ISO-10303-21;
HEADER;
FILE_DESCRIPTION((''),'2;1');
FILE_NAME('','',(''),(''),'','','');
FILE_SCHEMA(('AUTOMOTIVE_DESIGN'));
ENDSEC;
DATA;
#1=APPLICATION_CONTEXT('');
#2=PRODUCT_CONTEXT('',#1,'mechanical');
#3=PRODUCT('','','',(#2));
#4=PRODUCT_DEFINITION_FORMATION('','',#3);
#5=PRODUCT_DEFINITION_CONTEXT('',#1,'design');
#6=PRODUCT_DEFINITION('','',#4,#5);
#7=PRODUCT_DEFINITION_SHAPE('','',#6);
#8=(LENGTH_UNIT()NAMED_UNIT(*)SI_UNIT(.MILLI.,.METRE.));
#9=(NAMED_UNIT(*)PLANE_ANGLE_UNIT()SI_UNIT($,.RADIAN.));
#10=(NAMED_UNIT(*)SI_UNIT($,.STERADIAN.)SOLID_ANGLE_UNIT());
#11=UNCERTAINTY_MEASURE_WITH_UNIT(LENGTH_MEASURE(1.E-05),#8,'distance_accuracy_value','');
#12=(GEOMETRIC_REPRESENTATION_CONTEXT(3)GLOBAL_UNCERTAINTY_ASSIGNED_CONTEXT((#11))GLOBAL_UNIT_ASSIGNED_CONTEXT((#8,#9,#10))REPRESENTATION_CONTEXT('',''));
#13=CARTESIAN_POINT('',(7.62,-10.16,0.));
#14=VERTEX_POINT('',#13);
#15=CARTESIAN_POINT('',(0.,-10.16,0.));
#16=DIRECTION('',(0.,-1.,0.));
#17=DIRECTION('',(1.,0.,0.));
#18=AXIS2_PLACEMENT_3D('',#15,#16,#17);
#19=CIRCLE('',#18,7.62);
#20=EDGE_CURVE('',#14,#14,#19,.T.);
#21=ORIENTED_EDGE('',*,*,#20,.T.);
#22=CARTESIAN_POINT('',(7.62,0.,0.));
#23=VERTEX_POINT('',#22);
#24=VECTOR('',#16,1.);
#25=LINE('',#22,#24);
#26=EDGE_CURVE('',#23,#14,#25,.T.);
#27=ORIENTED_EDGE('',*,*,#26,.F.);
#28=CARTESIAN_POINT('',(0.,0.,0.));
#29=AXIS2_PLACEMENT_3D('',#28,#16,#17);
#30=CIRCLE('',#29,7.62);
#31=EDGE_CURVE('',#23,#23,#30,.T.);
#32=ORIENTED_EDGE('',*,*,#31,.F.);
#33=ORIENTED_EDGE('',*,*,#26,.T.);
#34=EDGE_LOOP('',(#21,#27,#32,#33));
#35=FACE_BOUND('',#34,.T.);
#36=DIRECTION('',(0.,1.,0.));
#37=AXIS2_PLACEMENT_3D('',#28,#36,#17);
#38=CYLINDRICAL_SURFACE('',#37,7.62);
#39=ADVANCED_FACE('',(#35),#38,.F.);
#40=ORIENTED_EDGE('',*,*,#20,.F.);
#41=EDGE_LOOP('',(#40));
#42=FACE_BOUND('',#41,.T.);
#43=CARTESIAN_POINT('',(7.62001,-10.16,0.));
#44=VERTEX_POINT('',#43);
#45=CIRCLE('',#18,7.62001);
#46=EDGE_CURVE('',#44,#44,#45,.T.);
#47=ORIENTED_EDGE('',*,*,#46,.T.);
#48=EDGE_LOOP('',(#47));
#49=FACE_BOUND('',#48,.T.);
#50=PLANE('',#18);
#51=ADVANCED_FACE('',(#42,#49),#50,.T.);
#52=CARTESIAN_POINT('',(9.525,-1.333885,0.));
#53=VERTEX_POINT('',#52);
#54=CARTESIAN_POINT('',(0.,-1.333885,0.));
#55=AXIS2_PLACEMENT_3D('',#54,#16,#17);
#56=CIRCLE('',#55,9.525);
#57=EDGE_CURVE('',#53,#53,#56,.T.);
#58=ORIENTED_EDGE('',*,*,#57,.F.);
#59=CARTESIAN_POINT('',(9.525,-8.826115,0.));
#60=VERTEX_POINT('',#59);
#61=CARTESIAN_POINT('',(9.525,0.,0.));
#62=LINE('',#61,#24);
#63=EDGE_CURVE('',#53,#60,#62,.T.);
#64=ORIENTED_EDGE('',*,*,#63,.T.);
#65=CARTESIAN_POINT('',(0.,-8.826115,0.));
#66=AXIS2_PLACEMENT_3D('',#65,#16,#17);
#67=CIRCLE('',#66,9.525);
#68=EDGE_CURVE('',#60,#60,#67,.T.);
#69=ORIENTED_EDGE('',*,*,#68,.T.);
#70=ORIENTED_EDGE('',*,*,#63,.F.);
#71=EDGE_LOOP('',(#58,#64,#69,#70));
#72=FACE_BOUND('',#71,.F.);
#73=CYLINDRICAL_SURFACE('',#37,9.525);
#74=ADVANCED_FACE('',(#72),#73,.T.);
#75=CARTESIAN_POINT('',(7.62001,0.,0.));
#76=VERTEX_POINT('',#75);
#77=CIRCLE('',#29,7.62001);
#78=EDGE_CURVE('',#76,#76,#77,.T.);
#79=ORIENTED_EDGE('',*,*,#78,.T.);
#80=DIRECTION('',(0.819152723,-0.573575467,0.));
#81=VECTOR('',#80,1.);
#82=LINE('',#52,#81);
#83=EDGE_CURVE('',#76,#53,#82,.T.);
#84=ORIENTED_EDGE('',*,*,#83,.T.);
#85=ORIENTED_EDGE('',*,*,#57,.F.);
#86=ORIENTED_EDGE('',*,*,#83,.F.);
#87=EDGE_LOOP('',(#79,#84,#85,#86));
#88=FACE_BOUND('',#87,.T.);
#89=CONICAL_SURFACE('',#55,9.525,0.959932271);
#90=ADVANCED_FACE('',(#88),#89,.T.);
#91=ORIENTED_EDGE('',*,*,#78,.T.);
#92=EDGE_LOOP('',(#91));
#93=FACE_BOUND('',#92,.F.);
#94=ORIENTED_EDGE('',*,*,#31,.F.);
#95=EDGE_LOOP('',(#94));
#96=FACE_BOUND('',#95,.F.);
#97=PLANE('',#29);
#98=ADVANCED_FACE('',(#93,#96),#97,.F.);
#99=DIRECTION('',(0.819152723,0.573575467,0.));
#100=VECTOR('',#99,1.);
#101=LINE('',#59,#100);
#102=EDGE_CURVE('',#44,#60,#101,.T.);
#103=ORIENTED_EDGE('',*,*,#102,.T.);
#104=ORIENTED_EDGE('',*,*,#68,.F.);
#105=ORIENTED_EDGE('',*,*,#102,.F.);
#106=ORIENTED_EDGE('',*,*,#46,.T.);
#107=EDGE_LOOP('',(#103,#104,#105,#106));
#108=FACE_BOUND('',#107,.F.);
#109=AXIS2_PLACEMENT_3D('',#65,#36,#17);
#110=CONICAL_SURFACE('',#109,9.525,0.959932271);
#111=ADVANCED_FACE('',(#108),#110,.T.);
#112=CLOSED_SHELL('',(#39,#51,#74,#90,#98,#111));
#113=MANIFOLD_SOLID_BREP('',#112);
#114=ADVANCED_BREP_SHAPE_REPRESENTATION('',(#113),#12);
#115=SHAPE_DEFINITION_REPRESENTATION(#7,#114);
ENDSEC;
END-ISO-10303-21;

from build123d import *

# Parameters (mm, degrees)
F0_R       = 9.525
F0_R_2     = 7.62
F1_DEPTH   = 10.16
F2_SIZE2   = 1.333885
F2_SIZE    = 1.90499
F2_2_SIZE2 = 1.333885
F2_2_SIZE  = 1.90499


# Not quite as in the source:
# - a fillet or chamfer is up to 0.001 mm smaller than in the source, because OpenCascade refuses the exact size


with BuildPart() as f1:
    # F0 (on Front) → F1 (new body)
    with BuildSketch(Plane.XZ):
        Circle(F0_R)
        Circle(F0_R_2, mode=Mode.SUBTRACT)
    extrude(amount=F1_DEPTH)

    # F2 (size 1.905 and 1.3338953603 in the source; OpenCascade refuses exactly that, so slightly less here)
    f2_edges = [f1.edges().sort_by_distance(p)[0] for p in [
        (-9.525, -10.16, 0),
    ]]
    f2_side = f1.faces().sort_by_distance((-9.255592, -10.16, 0))[0]
    chamfer(f2_edges, length=F2_SIZE, length2=F2_SIZE2, reference=f2_side)

    # F2#2 (size 1.905 and 1.3338953603 in the source; OpenCascade refuses exactly that, so slightly less here)
    f2_2_edges = [f1.edges().sort_by_distance(p)[0] for p in [
        (-9.525, 0, 0),
    ]]
    f2_2_side = f1.faces().sort_by_distance((-9.255592, 0, 0))[0]
    chamfer(f2_2_edges, length=F2_2_SIZE, length2=F2_2_SIZE2, reference=f2_2_side)


solid = f1.part
